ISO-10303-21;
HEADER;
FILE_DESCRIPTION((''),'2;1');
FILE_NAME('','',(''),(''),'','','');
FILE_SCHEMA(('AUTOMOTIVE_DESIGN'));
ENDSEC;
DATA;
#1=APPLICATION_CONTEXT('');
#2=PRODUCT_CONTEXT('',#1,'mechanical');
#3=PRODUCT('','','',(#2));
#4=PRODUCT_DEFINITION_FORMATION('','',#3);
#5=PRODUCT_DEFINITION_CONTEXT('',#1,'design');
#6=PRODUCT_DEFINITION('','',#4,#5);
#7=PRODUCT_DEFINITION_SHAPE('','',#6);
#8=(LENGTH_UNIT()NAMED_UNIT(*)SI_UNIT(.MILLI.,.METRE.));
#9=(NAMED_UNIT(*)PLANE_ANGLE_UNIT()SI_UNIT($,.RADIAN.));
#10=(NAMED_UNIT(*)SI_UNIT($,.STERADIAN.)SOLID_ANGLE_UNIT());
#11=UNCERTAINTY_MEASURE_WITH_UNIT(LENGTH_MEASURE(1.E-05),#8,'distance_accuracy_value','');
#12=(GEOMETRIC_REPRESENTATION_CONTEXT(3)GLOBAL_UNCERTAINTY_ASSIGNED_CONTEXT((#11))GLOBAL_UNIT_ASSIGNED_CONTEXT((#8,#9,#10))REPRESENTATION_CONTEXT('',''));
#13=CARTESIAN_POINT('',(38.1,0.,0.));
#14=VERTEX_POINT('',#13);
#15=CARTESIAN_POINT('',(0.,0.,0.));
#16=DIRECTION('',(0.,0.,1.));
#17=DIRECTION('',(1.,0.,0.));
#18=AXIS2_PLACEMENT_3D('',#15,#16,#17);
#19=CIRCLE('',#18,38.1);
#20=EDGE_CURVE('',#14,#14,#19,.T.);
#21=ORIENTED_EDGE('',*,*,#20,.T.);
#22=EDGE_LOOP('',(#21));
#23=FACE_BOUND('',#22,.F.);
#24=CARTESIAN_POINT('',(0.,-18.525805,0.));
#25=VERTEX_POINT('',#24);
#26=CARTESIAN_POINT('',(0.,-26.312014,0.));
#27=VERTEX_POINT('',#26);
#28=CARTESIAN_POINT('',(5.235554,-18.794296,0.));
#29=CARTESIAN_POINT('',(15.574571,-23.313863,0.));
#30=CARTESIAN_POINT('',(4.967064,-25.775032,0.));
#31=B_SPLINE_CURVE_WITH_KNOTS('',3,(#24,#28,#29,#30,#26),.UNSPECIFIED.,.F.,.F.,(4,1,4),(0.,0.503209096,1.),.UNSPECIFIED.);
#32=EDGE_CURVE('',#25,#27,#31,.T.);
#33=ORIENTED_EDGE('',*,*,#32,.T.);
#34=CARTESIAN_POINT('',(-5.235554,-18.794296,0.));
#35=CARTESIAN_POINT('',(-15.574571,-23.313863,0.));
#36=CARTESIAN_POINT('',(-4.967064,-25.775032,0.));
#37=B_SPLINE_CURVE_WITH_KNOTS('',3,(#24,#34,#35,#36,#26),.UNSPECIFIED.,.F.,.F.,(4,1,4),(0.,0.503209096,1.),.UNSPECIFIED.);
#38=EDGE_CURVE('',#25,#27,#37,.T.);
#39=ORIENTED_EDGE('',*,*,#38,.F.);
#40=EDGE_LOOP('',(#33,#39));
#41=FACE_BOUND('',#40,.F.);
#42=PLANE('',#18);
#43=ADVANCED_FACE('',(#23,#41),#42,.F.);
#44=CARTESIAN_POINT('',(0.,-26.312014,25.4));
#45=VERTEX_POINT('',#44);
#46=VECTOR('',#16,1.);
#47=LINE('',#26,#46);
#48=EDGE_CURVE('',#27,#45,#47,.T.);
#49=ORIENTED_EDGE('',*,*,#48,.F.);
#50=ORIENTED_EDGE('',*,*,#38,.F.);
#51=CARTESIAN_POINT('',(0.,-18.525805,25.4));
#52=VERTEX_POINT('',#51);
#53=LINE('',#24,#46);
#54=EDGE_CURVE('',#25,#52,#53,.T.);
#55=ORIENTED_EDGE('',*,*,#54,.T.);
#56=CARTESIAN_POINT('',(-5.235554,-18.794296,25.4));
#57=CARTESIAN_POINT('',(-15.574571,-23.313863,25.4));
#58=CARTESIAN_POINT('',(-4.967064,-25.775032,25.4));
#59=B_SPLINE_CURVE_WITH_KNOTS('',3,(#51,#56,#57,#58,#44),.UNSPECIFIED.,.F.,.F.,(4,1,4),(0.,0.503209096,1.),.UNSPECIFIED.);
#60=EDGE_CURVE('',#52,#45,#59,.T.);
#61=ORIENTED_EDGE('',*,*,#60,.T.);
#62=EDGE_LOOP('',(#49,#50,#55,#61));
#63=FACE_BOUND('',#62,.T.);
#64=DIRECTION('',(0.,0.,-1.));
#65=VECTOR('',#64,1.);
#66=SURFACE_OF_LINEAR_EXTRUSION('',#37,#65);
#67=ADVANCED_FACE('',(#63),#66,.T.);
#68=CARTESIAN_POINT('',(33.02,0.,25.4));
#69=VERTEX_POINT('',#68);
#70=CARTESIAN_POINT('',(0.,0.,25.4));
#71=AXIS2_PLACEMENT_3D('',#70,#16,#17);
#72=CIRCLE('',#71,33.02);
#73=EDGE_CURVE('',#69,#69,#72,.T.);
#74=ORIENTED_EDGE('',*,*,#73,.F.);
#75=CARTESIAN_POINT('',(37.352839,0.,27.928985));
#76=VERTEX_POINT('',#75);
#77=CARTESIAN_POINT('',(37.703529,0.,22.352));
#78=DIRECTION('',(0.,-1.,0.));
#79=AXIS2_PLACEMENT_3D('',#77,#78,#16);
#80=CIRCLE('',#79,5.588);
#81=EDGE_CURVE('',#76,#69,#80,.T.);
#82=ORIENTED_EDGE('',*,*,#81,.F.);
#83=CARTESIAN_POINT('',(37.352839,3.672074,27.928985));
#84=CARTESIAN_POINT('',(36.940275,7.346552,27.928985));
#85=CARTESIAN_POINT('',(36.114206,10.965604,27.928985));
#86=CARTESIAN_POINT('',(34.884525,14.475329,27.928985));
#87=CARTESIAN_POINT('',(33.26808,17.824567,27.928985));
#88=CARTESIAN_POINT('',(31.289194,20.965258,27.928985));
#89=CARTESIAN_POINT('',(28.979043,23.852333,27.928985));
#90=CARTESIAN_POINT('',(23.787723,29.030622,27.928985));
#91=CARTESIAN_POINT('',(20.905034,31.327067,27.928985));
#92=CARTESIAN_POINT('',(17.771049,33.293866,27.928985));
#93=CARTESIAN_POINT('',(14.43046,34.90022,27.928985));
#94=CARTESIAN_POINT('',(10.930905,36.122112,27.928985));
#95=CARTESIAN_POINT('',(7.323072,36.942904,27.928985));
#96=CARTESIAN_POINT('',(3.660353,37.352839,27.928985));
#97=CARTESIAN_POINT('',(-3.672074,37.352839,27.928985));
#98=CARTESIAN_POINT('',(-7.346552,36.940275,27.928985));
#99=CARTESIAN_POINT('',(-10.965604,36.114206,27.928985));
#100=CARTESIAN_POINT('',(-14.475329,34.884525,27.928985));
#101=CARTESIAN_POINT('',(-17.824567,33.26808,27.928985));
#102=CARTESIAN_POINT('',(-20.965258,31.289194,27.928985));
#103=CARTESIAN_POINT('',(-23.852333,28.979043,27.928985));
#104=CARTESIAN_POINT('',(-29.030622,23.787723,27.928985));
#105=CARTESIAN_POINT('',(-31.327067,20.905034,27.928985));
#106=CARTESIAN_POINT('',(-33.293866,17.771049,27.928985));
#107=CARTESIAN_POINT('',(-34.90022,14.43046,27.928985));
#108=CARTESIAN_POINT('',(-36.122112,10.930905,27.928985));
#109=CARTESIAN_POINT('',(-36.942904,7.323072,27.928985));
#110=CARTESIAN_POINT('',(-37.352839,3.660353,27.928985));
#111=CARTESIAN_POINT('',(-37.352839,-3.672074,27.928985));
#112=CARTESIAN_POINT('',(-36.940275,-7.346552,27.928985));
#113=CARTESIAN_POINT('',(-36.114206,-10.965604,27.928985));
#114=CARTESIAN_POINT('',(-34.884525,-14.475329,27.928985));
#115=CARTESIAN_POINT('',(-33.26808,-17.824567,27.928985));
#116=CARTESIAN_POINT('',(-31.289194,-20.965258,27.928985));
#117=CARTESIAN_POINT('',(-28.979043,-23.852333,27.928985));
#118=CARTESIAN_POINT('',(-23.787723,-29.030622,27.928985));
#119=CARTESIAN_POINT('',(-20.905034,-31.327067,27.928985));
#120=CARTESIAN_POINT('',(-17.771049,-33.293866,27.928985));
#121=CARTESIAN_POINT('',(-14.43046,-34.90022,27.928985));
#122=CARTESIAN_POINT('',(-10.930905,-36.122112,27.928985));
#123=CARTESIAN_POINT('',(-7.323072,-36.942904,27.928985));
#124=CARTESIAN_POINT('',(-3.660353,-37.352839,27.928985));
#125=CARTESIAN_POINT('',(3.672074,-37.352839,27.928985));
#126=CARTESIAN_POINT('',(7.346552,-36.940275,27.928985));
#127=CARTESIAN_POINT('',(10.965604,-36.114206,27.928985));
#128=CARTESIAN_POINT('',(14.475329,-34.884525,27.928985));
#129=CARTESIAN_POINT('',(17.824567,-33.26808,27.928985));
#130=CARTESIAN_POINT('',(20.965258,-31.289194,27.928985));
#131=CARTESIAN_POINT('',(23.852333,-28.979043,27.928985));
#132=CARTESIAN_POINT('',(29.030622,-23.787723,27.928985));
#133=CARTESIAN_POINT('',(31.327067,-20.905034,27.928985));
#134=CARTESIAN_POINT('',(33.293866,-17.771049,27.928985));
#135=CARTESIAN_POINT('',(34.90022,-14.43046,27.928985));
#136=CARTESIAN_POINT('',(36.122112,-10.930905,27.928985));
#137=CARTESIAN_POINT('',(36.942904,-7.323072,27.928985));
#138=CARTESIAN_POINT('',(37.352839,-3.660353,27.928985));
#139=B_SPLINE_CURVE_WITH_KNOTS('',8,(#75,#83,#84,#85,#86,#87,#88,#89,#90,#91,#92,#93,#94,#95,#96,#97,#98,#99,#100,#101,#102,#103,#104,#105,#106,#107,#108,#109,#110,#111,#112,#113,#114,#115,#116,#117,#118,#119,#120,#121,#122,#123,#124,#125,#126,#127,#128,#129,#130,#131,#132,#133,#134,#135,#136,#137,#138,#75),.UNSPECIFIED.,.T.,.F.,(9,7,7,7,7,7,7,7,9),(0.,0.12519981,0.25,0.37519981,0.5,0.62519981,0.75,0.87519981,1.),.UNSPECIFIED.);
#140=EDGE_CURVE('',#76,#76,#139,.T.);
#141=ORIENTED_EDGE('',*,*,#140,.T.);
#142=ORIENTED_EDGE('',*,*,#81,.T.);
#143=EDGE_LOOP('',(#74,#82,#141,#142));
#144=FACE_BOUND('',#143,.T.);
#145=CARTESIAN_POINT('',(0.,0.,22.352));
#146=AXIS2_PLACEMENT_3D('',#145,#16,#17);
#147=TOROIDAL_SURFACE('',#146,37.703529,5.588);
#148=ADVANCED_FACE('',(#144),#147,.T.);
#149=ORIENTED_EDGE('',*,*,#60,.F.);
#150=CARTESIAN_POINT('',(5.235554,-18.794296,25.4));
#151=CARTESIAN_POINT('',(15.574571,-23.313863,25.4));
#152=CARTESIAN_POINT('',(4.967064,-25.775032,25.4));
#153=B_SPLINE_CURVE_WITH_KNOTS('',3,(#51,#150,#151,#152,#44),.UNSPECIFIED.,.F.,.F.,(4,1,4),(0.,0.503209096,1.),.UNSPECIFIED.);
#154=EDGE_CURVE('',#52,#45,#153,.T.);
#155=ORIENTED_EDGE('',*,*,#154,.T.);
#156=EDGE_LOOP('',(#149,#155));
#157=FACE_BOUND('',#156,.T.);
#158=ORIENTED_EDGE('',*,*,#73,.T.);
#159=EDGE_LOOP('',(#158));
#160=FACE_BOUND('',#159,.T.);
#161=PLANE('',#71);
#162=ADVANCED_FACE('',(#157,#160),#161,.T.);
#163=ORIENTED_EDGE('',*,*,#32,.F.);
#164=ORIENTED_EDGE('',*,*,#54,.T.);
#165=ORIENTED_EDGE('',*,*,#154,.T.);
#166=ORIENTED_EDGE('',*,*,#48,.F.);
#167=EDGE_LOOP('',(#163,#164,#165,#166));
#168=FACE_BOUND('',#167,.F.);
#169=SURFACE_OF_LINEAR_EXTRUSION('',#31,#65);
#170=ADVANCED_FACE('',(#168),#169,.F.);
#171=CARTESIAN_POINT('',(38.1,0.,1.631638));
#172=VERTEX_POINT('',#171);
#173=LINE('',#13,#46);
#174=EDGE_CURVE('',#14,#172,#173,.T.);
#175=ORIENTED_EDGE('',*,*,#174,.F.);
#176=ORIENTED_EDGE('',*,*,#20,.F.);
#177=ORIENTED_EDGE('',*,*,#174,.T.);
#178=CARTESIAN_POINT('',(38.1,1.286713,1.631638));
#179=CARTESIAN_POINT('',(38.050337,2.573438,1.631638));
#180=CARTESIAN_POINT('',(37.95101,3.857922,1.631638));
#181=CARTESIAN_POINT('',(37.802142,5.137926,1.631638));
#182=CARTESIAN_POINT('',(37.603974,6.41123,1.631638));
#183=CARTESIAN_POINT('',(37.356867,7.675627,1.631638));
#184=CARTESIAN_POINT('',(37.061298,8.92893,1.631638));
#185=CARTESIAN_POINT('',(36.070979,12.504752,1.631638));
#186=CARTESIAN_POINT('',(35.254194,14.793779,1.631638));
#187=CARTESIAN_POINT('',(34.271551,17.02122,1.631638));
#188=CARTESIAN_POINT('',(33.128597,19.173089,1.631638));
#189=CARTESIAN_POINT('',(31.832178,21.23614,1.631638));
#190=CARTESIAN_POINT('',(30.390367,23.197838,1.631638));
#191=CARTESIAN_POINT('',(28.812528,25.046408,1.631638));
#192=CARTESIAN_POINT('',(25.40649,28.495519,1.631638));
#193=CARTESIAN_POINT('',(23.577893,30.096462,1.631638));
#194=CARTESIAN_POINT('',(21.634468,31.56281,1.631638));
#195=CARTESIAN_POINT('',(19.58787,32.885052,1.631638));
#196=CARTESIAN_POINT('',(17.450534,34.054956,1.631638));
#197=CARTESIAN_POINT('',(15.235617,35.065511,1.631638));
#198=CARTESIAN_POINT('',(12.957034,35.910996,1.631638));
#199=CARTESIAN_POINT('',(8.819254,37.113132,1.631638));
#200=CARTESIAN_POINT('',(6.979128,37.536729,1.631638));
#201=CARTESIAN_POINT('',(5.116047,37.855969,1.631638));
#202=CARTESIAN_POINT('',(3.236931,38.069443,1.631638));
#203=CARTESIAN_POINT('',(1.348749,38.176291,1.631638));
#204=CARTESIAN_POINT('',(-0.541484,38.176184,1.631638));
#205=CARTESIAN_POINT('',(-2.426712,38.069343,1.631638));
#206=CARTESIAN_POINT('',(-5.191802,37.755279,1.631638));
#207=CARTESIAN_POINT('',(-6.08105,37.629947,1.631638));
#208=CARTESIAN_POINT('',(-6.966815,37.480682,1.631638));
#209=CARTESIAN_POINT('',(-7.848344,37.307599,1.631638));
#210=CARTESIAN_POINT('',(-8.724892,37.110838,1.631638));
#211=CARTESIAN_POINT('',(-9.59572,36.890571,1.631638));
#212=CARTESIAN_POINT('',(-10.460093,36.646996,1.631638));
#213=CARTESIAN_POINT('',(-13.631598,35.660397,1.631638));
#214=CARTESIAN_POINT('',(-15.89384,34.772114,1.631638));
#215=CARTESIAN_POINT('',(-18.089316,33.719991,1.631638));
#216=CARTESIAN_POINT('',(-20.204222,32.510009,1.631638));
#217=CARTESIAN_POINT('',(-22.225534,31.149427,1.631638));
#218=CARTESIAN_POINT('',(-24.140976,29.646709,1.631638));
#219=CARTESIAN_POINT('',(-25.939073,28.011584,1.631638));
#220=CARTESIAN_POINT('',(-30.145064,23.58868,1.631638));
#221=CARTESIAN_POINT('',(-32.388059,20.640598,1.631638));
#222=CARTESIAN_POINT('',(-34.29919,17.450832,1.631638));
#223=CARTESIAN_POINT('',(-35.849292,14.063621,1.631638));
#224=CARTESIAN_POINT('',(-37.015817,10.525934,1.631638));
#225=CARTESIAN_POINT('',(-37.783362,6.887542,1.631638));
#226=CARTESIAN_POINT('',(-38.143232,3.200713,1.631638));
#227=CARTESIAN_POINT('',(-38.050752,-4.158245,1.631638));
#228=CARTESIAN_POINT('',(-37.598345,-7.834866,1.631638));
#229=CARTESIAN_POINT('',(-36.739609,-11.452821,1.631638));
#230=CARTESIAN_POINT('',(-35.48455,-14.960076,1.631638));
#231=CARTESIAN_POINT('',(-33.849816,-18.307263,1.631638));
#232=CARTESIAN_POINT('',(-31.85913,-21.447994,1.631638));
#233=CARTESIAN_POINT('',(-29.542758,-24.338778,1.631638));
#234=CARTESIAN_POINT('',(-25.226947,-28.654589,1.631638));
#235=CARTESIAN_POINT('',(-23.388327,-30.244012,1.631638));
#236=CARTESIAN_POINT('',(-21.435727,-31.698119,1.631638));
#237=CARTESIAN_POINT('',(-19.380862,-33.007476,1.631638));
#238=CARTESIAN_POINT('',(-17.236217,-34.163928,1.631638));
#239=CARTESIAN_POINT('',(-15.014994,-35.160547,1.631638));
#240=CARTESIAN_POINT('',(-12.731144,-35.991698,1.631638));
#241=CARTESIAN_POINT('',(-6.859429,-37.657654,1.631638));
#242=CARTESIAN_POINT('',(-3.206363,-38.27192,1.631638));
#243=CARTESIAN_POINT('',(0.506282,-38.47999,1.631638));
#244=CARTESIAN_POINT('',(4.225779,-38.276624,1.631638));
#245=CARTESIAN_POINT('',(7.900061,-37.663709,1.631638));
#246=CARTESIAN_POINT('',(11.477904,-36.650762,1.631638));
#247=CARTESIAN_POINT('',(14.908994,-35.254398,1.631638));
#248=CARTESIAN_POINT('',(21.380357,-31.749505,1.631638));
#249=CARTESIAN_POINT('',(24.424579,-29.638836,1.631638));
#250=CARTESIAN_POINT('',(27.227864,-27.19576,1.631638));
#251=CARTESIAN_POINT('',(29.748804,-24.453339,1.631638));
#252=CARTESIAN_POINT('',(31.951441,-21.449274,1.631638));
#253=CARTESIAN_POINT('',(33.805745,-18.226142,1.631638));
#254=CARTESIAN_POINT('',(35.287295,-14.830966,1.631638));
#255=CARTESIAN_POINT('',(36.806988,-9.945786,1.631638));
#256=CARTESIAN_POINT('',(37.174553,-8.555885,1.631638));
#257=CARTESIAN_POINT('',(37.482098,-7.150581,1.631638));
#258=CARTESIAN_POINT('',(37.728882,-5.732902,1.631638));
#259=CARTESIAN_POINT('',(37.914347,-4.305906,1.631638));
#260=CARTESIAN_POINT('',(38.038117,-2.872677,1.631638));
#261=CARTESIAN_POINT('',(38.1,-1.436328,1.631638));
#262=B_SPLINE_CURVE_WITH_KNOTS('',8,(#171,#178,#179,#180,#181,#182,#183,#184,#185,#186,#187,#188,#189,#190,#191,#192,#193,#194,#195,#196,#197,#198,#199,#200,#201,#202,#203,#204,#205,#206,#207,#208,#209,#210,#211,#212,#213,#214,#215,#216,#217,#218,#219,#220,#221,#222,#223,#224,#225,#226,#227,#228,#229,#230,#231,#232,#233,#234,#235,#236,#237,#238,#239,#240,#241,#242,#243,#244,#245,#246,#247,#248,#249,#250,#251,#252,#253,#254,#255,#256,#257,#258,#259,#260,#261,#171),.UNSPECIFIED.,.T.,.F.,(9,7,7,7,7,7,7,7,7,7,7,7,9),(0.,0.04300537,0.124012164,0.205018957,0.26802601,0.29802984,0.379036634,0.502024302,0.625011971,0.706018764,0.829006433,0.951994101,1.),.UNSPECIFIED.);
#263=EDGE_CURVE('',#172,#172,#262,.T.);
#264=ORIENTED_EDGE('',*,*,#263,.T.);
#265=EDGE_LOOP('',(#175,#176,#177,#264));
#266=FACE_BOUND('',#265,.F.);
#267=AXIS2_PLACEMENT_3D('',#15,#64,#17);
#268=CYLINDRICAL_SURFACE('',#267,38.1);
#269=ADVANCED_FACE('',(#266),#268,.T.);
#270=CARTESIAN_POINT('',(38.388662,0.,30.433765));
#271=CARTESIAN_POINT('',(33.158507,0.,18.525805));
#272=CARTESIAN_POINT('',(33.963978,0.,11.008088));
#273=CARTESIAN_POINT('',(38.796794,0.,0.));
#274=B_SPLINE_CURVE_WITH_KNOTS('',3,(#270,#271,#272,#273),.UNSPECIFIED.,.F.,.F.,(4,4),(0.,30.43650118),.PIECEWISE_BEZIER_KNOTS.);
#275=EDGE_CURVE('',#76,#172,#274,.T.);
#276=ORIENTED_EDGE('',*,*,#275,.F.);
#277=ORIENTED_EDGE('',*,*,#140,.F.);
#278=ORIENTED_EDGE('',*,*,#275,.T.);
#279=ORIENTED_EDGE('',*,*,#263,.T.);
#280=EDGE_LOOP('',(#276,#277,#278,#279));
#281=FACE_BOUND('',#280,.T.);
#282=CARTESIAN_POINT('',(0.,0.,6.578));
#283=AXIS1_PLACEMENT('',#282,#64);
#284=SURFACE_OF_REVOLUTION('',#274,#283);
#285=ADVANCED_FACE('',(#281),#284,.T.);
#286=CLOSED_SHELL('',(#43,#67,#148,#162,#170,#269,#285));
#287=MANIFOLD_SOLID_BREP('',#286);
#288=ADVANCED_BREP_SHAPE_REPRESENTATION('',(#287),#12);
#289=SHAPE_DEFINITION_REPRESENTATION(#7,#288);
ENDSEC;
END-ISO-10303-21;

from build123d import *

# Parameters (mm, degrees)
F0_R     = 38.1
F0_R_2   = 33.02
F1_DEPTH = 27.94
F2_DEPTH = 25.4


# Not quite as in the source:
# - a fillet or chamfer that OpenCascade refuses, or shapes differently, is made with other operations: its cross-section is extruded or revolved along the edge and cut away or added


with BuildPart() as f1:
    # F0 (on Top) → F1 (new body)
    with BuildSketch(Plane.XY):
        Circle(F0_R)
        Circle(F0_R_2, mode=Mode.SUBTRACT)
    extrude(amount=F1_DEPTH)

    # F0 (on Top) → F2 (join)
    with BuildSketch(Plane.XY):
        Circle(F0_R_2)
        with BuildLine():
            add(Edge.make_bspline(
                [(0, -18.5258053243), (-5.2355541848, -18.7942963094), (-15.57457148, -23.313863117), (-4.9670636654, -25.775032118), (0, -26.312014088)],
                knots=[0, 0, 0, 0, 0.5032090963, 1, 1, 1, 1], degree=3))
            add(Edge.make_bspline(
                [(0, -18.5258053243), (5.2355541848, -18.7942963094), (15.57457148, -23.313863117), (4.9670636654, -25.775032118), (0, -26.312014088)],
                knots=[0, 0, 0, 0, 0.5032090963, 1, 1, 1, 1], degree=3))
        make_face(mode=Mode.SUBTRACT)
    extrude(amount=F2_DEPTH)

    # F3: fillet of radius 5.588 on 1 edges, made by hand

    # F3_s1 → F3_t2 (revolve, cut)
    with BuildSketch(Plane.XZ):
        with BuildLine():
            ThreePointArc((37.7035285843, 27.94), (35.03955411, 27.2641262199), (33.02, 25.4))
            Line((33.02, 25.4), (32.9263294283, 25.46096))
            ThreePointArc((32.9263294283, 25.46096), (32.90824, 26.67), (32.90824, 27.94))
            Line((32.90824, 27.94), (33.02, 28.05176))
            Line((33.02, 28.05176), (37.7035285843, 28.05176))
            Line((37.7035285843, 28.05176), (37.7035285843, 27.94))
        make_face()
    revolve(axis=Axis((0, 0, 27.94), (0, 0, 1)), mode=Mode.SUBTRACT)

    # F4 (on Front) → F5 (revolve, cut)
    with BuildSketch(Plane.XZ):
        with BuildLine():
            Line((38.7967936695, 0), (38.3886620402, 30.4337646812))
            add(Edge.make_bspline(
                [(38.3886620402, 30.4337646812), (33.1585071981, 18.5258053243), (33.9639782906, 11.0080875456), (38.7967936695, 0)],
                knots=[0, 0, 0, 0, 30.4365011803, 30.4365011803, 30.4365011803, 30.4365011803], degree=3))
        make_face()
    revolve(axis=Axis((0, 0, 6.5780002624), (0, 0, -1)), mode=Mode.SUBTRACT)


solid = f1.part
